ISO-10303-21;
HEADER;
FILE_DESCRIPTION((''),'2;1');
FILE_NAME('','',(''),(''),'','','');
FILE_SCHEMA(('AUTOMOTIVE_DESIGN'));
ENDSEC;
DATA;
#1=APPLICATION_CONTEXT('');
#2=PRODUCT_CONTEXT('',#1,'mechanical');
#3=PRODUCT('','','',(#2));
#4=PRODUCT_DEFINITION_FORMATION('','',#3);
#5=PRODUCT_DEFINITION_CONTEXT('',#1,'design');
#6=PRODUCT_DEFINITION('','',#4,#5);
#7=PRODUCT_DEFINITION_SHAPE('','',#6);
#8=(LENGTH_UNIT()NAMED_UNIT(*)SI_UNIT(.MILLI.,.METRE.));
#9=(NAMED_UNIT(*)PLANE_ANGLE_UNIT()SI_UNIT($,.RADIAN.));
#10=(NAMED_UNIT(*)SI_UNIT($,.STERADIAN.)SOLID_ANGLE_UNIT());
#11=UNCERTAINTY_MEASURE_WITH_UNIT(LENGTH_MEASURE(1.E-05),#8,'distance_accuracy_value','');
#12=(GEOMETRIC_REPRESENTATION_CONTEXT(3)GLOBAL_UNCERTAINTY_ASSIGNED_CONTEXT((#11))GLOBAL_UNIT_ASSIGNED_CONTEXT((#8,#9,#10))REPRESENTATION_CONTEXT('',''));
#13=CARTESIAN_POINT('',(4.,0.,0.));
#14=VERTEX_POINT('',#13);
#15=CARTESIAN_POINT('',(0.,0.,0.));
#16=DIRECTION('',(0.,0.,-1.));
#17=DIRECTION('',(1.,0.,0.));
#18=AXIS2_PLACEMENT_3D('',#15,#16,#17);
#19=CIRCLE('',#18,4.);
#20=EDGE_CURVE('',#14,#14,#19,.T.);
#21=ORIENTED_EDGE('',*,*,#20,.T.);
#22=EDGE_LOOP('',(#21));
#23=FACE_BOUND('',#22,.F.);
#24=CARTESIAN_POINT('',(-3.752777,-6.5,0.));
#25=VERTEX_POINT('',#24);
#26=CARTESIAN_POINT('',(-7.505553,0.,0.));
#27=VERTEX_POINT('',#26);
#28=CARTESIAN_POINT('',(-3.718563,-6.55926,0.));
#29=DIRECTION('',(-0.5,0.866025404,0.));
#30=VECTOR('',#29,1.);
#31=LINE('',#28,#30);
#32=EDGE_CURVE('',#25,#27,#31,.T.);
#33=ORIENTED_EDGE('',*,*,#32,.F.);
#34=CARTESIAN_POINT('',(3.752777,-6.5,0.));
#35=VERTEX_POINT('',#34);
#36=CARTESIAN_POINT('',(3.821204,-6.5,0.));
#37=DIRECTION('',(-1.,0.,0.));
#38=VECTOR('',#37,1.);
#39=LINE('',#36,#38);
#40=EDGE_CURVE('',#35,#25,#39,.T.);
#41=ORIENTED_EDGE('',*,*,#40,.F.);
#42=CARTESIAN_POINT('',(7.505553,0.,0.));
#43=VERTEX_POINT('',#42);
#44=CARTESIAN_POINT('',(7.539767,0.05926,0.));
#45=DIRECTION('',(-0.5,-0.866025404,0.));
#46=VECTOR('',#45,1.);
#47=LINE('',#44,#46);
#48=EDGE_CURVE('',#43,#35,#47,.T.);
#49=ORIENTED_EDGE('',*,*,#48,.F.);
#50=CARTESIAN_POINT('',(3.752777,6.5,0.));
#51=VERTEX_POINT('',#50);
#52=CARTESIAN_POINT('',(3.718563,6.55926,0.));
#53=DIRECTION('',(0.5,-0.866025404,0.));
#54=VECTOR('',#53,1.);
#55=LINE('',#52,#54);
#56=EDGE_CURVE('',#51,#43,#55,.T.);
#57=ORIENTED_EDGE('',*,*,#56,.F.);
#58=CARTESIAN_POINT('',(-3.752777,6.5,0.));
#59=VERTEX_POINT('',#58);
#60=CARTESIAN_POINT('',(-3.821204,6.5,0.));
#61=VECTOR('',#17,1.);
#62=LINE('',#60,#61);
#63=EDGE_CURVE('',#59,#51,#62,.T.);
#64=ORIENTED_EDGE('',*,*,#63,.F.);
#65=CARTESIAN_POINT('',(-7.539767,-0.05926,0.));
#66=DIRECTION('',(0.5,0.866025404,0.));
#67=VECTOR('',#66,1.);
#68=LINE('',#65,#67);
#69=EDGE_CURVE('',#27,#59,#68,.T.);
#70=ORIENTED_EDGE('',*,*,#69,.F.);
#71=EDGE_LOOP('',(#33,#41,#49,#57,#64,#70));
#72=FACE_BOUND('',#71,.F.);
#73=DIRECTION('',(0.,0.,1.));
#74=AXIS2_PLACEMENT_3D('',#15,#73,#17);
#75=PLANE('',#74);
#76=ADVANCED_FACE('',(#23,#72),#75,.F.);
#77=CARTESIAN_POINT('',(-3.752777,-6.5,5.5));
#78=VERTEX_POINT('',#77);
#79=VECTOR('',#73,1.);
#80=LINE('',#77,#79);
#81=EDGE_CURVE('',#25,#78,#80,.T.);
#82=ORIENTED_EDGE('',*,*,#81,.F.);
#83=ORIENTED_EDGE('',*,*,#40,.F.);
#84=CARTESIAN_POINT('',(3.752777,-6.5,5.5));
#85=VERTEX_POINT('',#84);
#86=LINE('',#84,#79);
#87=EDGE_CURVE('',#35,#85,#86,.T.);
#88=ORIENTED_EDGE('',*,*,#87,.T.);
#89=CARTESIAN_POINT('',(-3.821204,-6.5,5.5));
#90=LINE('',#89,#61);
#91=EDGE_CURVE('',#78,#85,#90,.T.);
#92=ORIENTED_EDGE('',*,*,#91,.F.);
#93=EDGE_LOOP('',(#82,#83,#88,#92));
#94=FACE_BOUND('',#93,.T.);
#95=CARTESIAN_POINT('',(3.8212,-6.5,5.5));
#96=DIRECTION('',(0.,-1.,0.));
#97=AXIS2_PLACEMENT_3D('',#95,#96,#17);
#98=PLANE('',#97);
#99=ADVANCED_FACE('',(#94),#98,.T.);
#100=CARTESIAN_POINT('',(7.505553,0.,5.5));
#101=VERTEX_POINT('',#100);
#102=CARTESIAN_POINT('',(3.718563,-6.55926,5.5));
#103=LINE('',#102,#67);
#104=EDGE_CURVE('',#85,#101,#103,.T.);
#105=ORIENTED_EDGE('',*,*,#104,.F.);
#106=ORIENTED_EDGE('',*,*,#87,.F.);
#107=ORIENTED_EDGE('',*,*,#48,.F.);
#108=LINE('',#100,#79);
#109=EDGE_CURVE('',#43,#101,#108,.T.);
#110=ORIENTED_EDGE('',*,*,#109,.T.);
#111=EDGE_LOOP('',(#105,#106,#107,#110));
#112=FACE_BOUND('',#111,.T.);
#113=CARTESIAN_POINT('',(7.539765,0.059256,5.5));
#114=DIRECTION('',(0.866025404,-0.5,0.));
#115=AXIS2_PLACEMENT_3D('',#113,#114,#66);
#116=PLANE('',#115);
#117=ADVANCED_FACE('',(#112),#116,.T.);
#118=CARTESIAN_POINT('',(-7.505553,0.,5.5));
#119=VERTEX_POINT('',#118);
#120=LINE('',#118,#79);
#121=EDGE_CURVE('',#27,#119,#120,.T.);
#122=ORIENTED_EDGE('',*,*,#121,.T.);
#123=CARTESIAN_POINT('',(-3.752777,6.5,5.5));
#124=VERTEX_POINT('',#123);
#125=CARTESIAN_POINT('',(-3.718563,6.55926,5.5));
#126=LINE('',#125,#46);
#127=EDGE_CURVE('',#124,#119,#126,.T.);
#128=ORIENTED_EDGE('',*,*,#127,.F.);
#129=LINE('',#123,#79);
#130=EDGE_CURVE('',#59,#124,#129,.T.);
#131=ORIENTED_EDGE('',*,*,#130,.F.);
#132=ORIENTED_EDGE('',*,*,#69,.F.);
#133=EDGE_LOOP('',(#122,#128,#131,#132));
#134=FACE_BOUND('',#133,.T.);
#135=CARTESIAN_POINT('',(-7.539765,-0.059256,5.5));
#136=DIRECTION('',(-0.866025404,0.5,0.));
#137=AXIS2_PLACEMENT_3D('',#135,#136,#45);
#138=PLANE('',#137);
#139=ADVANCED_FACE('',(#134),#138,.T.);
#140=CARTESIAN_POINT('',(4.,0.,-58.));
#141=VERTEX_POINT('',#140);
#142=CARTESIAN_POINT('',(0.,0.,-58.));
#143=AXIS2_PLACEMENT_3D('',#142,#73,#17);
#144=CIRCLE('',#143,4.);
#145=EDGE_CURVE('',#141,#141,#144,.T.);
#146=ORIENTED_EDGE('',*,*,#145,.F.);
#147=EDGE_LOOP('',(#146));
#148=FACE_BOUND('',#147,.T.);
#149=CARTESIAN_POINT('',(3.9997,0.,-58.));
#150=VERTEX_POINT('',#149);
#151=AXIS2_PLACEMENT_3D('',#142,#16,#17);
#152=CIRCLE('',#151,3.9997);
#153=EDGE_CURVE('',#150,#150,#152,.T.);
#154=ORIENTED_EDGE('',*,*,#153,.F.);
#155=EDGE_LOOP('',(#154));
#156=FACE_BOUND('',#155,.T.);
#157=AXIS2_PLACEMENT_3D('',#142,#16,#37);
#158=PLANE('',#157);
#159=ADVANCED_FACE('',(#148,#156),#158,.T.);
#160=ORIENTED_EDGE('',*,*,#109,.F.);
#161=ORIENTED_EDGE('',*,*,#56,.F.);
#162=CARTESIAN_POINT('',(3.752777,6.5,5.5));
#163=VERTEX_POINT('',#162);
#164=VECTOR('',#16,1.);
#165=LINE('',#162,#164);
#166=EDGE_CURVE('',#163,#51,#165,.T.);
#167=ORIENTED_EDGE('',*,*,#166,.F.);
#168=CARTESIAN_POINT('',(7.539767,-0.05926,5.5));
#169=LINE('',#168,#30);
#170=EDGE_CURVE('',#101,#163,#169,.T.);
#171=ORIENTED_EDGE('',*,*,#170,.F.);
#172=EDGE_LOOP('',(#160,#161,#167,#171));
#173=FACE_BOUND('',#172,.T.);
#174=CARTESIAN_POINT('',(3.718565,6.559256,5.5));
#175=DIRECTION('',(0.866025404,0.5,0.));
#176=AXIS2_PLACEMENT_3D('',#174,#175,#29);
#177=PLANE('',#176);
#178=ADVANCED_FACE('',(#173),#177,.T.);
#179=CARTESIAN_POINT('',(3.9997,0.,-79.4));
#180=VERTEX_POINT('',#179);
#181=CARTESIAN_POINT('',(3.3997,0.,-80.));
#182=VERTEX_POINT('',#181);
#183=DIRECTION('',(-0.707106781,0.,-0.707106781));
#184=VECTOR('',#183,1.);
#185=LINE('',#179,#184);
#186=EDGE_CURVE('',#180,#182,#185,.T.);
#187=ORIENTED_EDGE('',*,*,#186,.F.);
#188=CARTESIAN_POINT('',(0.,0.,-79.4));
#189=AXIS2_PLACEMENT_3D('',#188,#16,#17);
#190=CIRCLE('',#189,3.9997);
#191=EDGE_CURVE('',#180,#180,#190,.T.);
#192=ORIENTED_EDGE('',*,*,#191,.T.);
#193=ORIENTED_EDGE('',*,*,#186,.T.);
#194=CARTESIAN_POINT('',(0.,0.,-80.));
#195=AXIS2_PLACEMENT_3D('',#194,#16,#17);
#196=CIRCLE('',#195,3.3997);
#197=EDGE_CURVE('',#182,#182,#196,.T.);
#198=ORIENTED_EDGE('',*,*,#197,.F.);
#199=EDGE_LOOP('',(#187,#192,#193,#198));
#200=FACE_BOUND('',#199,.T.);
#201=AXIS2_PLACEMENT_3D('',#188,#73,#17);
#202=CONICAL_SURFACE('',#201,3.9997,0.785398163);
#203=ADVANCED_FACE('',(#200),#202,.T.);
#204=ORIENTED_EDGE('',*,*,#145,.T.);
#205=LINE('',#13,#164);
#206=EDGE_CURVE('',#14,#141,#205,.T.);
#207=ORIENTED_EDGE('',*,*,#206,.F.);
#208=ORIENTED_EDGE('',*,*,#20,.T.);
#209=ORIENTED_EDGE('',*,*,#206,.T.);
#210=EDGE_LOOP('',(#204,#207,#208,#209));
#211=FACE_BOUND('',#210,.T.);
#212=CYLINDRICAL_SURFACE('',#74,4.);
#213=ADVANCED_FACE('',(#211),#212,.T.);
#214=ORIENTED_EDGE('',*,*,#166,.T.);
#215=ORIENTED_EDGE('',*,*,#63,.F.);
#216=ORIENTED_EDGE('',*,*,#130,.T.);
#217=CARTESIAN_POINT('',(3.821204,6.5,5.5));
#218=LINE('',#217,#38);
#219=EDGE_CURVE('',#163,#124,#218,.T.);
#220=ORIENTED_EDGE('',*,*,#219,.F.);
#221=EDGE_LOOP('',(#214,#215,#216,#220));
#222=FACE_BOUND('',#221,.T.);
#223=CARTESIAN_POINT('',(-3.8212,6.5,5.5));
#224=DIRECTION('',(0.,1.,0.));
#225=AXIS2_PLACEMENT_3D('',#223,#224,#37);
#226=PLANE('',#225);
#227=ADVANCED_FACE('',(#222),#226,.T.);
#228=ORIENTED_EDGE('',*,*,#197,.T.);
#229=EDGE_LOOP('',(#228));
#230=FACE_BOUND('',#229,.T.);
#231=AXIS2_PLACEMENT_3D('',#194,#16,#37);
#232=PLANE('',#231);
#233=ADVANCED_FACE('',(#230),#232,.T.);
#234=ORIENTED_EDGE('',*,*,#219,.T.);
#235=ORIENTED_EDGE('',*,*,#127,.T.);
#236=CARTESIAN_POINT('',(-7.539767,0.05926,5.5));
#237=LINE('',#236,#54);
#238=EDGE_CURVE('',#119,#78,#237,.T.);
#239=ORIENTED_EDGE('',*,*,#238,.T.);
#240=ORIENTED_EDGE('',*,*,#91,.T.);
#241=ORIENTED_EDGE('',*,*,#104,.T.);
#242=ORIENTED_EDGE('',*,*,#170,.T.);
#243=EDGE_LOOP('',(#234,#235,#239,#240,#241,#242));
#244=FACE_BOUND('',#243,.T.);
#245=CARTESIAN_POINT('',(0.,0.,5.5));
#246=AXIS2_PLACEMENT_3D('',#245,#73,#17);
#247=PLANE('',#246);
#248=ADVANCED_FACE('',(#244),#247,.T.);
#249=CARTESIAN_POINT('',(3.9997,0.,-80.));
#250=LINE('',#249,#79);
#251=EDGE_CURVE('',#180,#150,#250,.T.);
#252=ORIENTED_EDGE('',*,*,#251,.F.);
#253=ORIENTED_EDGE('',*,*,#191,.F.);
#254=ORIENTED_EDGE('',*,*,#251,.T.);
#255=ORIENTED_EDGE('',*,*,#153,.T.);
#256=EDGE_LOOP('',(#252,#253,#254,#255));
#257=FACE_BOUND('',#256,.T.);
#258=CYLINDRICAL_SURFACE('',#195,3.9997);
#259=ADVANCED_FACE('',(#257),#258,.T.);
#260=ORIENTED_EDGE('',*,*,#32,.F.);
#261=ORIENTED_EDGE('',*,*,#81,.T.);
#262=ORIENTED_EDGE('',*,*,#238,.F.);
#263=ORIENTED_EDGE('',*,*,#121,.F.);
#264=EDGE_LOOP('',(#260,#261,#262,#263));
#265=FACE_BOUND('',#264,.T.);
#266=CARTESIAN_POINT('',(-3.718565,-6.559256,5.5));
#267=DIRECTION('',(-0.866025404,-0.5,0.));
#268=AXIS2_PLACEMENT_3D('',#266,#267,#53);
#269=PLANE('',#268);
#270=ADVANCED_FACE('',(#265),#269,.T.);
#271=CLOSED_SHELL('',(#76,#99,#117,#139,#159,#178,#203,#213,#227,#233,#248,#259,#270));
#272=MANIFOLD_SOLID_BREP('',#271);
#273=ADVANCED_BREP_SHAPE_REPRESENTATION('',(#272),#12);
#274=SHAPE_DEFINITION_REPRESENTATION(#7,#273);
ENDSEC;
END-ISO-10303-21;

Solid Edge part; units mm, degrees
sketch "Sketch1" plane through (0, 0, 0) normal (0, 0, 1) x (1, 0, 0)
  circle A0 centre (0, 0) radius 7.54
  dimension "D1" = 15.08
extrude "Protrusion1" add sketch "Sketch1" along normal blind 5.5
sketch "Sketch2" plane through (0, 0, 0) normal (0, 0, -1) x (1, 0, 0)
  circle A0 centre (0, 0) radius 4
extrude "Protrusion2" add sketch "Sketch2" along normal blind 80
sketch "Sketch3" plane through (0, 0, -80) normal (0, 0, -1) x (1, 0, 0)
  circle A0 centre (0, 0) radius 3.9997
extrude "Cutout1" cut sketch "Sketch3" against normal blind 22 flip side to cut
chamfer "Chamfer_1" distance 0.6 angle 45 1 edges at (-3.9997, 0, -80)
sketch "Sketch4" plane through (0, 0, 5.5) normal (0, 0, 1) x (1, 0, 0)
  line L0 (-3.8212, 6.5) -> (3.8212, 6.5)
  dimension "D1" = 13
extrude "Cutout2" cut sketch "Sketch4" against normal up to next material side at (0, 6.55, 5.5)
pattern_circular "Pattern1" count 6 over 360 about axis through (0, 0, 5.5) along (0, 0, 1) of "Cutout2"
properties part number "24104777"
